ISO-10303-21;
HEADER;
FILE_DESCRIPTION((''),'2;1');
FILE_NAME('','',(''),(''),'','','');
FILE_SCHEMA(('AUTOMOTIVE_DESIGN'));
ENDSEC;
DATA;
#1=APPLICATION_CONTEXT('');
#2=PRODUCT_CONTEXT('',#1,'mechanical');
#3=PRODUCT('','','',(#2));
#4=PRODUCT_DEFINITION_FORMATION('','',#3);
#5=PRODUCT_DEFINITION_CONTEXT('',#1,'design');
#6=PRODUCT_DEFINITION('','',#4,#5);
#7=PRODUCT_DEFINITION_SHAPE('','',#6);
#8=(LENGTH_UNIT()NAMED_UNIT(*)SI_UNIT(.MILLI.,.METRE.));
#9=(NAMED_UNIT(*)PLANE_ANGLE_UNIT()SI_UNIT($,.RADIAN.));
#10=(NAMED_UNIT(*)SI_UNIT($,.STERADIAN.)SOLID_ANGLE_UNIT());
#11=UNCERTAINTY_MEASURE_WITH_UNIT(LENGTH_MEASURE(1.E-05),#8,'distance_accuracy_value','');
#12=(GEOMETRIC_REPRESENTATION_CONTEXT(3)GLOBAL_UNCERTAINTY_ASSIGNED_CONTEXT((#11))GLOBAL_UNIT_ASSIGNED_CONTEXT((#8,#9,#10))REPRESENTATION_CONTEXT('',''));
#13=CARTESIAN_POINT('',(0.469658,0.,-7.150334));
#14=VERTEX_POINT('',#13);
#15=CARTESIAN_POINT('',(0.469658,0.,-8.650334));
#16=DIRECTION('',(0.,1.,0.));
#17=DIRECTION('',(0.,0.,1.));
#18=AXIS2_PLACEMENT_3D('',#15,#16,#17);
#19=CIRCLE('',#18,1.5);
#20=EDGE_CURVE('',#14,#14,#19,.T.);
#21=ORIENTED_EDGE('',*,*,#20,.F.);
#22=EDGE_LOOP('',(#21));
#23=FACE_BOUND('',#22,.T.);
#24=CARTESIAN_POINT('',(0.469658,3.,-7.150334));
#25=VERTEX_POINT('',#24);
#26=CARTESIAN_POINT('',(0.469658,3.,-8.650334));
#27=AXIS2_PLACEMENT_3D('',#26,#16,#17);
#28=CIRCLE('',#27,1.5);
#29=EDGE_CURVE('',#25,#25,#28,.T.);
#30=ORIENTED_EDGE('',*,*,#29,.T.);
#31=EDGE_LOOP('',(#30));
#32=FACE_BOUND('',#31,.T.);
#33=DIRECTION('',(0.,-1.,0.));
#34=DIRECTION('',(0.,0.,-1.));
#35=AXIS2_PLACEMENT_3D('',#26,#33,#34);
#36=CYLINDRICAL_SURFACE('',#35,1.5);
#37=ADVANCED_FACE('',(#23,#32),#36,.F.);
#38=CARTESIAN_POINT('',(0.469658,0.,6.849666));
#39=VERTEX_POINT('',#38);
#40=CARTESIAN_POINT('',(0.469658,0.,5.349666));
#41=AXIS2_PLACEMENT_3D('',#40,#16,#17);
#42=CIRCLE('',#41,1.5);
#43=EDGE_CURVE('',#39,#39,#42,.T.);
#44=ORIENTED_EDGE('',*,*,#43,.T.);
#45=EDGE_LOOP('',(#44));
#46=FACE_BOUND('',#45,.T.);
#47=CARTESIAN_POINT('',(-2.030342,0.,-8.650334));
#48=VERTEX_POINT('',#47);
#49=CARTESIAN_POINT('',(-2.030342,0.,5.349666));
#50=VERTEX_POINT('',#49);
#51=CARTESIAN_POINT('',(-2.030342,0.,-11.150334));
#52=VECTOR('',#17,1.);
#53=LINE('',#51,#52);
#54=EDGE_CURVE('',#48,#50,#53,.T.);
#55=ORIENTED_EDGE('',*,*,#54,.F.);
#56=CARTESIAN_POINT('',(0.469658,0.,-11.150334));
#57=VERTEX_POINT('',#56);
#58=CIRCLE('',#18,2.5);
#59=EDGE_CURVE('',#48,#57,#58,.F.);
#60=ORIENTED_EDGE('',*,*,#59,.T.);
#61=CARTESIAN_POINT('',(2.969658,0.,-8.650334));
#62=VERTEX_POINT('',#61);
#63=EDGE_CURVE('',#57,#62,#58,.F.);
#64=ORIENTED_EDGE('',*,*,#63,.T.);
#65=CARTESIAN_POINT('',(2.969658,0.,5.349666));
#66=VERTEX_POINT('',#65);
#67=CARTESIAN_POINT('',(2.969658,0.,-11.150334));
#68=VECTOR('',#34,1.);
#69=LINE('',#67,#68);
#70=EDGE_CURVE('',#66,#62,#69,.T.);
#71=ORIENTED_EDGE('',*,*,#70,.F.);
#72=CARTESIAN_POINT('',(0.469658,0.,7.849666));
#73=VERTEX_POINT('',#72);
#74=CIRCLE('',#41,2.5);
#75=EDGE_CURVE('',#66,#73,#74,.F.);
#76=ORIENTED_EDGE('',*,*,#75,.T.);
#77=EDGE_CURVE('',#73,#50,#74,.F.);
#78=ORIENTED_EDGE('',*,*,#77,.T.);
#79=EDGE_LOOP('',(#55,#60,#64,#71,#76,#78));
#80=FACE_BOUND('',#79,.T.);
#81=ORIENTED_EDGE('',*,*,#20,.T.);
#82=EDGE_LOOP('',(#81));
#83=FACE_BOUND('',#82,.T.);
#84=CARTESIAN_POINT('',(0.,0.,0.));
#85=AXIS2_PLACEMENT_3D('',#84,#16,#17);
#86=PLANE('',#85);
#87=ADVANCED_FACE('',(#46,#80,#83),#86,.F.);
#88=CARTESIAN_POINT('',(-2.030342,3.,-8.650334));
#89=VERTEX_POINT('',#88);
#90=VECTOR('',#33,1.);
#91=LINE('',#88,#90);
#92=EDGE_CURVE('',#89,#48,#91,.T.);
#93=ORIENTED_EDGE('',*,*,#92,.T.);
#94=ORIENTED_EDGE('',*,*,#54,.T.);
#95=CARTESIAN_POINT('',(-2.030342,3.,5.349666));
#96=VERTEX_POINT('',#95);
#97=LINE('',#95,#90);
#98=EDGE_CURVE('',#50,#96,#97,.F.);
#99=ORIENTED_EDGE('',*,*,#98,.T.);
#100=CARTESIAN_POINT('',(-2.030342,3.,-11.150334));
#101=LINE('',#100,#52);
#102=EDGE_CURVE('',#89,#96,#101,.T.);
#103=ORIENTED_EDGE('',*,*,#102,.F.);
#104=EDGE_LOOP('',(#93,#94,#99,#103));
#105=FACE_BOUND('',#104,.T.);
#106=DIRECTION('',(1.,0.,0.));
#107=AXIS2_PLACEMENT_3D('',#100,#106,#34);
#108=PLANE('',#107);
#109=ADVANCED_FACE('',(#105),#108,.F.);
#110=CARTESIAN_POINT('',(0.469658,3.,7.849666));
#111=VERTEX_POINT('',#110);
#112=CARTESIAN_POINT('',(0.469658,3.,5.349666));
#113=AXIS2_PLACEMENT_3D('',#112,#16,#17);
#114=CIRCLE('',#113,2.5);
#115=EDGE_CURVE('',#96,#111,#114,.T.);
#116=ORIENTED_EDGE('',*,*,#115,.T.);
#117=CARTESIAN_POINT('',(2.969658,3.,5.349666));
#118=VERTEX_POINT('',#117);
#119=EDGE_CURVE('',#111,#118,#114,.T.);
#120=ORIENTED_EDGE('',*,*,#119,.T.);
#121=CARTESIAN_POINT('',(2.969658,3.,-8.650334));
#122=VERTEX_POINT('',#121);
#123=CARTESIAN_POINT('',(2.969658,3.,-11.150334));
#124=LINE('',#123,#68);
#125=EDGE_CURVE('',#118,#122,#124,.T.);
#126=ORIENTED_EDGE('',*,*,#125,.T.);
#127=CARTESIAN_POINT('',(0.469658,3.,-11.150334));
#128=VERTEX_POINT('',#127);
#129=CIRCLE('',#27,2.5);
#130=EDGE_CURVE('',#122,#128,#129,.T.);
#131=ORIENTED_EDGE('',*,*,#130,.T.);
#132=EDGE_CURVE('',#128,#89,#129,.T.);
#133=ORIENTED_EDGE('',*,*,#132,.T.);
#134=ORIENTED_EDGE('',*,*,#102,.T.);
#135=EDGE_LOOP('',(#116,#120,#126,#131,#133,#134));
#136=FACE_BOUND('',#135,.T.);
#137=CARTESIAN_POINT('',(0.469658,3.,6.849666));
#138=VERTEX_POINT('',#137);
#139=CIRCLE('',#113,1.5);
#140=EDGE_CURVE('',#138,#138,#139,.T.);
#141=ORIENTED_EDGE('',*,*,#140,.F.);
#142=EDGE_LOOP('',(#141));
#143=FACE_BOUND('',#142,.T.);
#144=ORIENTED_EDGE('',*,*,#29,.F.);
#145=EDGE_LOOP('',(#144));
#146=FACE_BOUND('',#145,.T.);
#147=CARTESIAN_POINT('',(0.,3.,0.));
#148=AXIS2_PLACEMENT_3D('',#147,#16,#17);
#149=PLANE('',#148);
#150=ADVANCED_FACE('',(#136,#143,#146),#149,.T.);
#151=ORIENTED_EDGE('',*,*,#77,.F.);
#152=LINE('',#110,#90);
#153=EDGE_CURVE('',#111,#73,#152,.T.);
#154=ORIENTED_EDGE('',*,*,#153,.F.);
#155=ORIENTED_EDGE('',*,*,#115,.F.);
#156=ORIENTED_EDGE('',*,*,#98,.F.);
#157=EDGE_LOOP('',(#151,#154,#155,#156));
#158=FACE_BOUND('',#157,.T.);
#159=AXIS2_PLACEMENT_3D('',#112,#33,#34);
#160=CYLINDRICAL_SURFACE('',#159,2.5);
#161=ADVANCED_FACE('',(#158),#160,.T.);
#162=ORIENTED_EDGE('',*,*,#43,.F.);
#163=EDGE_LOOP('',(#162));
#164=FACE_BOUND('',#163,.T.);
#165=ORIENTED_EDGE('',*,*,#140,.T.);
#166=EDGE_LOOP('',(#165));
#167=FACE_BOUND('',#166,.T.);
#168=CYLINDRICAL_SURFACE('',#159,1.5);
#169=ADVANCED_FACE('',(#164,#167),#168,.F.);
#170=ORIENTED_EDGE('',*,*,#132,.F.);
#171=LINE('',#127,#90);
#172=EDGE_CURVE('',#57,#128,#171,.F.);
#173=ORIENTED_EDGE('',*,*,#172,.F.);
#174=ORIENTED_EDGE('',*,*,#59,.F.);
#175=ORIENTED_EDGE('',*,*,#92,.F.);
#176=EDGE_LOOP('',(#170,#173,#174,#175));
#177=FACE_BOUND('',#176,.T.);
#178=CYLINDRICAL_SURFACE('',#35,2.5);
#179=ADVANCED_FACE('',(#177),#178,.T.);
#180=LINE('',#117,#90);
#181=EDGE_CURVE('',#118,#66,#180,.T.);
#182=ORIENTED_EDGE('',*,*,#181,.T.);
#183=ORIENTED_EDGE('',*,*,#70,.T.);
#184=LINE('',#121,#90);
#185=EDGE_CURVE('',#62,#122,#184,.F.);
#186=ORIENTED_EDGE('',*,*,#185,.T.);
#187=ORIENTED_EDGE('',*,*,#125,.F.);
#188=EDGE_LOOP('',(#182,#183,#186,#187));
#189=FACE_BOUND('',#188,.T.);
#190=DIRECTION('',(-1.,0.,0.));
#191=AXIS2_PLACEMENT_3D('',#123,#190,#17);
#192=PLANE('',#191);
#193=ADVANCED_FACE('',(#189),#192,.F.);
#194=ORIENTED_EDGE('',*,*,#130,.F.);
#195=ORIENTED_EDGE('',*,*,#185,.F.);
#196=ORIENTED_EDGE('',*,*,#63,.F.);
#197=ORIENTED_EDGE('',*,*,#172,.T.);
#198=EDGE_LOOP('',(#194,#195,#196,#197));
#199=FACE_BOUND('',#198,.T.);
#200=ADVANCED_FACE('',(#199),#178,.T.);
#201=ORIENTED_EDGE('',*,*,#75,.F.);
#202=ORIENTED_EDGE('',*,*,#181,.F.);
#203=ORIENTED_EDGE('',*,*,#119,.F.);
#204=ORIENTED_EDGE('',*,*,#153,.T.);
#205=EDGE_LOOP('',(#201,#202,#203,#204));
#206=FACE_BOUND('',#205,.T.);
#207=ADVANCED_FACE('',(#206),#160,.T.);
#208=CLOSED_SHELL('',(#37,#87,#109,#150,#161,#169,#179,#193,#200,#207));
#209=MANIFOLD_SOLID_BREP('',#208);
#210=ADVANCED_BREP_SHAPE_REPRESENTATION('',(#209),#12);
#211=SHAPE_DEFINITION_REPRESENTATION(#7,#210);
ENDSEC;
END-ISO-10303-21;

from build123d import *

# Parameters (mm, degrees)
SKETCH1_W           = 5
SKETCH1_H           = 19
SKETCH1_R           = 1.5
BOSS_EXTRUDE1_DEPTH = 3
FILLET1_R           = 2.5


with BuildPart() as part:
    # Sketch1 → Boss-Extrude1 (new body)
    with BuildSketch(Plane(origin=(0, 0, 0), x_dir=(1, 0, 0), z_dir=(0, 1, 0))):
        with Locations((0.46965829, 1.650333526)):
            Rectangle(SKETCH1_W, SKETCH1_H)
        with Locations(Location((0.46965829, -5.349666474, 0), (0, 0, 270))):
            Circle(SKETCH1_R, mode=Mode.SUBTRACT)
        with Locations(Location((0.46965829, 8.650333526, 0), (0, 0, 270))):
            Circle(SKETCH1_R, mode=Mode.SUBTRACT)
    extrude(amount=BOSS_EXTRUDE1_DEPTH)

    # Fillet1
    fillet1_edges = [part.edges().sort_by_distance(p)[0] for p in [
        (2.96965829, 1.5, -11.150333526),
        (-2.03034171, 1.5, -11.150333526),
        (2.96965829, 1.5, 7.849666474),
        (-2.03034171, 1.5, 7.849666474),
    ]]
    fillet(fillet1_edges, radius=FILLET1_R - 0.0001)  # a hair under: the kernel refuses the full size


solid = part.part
